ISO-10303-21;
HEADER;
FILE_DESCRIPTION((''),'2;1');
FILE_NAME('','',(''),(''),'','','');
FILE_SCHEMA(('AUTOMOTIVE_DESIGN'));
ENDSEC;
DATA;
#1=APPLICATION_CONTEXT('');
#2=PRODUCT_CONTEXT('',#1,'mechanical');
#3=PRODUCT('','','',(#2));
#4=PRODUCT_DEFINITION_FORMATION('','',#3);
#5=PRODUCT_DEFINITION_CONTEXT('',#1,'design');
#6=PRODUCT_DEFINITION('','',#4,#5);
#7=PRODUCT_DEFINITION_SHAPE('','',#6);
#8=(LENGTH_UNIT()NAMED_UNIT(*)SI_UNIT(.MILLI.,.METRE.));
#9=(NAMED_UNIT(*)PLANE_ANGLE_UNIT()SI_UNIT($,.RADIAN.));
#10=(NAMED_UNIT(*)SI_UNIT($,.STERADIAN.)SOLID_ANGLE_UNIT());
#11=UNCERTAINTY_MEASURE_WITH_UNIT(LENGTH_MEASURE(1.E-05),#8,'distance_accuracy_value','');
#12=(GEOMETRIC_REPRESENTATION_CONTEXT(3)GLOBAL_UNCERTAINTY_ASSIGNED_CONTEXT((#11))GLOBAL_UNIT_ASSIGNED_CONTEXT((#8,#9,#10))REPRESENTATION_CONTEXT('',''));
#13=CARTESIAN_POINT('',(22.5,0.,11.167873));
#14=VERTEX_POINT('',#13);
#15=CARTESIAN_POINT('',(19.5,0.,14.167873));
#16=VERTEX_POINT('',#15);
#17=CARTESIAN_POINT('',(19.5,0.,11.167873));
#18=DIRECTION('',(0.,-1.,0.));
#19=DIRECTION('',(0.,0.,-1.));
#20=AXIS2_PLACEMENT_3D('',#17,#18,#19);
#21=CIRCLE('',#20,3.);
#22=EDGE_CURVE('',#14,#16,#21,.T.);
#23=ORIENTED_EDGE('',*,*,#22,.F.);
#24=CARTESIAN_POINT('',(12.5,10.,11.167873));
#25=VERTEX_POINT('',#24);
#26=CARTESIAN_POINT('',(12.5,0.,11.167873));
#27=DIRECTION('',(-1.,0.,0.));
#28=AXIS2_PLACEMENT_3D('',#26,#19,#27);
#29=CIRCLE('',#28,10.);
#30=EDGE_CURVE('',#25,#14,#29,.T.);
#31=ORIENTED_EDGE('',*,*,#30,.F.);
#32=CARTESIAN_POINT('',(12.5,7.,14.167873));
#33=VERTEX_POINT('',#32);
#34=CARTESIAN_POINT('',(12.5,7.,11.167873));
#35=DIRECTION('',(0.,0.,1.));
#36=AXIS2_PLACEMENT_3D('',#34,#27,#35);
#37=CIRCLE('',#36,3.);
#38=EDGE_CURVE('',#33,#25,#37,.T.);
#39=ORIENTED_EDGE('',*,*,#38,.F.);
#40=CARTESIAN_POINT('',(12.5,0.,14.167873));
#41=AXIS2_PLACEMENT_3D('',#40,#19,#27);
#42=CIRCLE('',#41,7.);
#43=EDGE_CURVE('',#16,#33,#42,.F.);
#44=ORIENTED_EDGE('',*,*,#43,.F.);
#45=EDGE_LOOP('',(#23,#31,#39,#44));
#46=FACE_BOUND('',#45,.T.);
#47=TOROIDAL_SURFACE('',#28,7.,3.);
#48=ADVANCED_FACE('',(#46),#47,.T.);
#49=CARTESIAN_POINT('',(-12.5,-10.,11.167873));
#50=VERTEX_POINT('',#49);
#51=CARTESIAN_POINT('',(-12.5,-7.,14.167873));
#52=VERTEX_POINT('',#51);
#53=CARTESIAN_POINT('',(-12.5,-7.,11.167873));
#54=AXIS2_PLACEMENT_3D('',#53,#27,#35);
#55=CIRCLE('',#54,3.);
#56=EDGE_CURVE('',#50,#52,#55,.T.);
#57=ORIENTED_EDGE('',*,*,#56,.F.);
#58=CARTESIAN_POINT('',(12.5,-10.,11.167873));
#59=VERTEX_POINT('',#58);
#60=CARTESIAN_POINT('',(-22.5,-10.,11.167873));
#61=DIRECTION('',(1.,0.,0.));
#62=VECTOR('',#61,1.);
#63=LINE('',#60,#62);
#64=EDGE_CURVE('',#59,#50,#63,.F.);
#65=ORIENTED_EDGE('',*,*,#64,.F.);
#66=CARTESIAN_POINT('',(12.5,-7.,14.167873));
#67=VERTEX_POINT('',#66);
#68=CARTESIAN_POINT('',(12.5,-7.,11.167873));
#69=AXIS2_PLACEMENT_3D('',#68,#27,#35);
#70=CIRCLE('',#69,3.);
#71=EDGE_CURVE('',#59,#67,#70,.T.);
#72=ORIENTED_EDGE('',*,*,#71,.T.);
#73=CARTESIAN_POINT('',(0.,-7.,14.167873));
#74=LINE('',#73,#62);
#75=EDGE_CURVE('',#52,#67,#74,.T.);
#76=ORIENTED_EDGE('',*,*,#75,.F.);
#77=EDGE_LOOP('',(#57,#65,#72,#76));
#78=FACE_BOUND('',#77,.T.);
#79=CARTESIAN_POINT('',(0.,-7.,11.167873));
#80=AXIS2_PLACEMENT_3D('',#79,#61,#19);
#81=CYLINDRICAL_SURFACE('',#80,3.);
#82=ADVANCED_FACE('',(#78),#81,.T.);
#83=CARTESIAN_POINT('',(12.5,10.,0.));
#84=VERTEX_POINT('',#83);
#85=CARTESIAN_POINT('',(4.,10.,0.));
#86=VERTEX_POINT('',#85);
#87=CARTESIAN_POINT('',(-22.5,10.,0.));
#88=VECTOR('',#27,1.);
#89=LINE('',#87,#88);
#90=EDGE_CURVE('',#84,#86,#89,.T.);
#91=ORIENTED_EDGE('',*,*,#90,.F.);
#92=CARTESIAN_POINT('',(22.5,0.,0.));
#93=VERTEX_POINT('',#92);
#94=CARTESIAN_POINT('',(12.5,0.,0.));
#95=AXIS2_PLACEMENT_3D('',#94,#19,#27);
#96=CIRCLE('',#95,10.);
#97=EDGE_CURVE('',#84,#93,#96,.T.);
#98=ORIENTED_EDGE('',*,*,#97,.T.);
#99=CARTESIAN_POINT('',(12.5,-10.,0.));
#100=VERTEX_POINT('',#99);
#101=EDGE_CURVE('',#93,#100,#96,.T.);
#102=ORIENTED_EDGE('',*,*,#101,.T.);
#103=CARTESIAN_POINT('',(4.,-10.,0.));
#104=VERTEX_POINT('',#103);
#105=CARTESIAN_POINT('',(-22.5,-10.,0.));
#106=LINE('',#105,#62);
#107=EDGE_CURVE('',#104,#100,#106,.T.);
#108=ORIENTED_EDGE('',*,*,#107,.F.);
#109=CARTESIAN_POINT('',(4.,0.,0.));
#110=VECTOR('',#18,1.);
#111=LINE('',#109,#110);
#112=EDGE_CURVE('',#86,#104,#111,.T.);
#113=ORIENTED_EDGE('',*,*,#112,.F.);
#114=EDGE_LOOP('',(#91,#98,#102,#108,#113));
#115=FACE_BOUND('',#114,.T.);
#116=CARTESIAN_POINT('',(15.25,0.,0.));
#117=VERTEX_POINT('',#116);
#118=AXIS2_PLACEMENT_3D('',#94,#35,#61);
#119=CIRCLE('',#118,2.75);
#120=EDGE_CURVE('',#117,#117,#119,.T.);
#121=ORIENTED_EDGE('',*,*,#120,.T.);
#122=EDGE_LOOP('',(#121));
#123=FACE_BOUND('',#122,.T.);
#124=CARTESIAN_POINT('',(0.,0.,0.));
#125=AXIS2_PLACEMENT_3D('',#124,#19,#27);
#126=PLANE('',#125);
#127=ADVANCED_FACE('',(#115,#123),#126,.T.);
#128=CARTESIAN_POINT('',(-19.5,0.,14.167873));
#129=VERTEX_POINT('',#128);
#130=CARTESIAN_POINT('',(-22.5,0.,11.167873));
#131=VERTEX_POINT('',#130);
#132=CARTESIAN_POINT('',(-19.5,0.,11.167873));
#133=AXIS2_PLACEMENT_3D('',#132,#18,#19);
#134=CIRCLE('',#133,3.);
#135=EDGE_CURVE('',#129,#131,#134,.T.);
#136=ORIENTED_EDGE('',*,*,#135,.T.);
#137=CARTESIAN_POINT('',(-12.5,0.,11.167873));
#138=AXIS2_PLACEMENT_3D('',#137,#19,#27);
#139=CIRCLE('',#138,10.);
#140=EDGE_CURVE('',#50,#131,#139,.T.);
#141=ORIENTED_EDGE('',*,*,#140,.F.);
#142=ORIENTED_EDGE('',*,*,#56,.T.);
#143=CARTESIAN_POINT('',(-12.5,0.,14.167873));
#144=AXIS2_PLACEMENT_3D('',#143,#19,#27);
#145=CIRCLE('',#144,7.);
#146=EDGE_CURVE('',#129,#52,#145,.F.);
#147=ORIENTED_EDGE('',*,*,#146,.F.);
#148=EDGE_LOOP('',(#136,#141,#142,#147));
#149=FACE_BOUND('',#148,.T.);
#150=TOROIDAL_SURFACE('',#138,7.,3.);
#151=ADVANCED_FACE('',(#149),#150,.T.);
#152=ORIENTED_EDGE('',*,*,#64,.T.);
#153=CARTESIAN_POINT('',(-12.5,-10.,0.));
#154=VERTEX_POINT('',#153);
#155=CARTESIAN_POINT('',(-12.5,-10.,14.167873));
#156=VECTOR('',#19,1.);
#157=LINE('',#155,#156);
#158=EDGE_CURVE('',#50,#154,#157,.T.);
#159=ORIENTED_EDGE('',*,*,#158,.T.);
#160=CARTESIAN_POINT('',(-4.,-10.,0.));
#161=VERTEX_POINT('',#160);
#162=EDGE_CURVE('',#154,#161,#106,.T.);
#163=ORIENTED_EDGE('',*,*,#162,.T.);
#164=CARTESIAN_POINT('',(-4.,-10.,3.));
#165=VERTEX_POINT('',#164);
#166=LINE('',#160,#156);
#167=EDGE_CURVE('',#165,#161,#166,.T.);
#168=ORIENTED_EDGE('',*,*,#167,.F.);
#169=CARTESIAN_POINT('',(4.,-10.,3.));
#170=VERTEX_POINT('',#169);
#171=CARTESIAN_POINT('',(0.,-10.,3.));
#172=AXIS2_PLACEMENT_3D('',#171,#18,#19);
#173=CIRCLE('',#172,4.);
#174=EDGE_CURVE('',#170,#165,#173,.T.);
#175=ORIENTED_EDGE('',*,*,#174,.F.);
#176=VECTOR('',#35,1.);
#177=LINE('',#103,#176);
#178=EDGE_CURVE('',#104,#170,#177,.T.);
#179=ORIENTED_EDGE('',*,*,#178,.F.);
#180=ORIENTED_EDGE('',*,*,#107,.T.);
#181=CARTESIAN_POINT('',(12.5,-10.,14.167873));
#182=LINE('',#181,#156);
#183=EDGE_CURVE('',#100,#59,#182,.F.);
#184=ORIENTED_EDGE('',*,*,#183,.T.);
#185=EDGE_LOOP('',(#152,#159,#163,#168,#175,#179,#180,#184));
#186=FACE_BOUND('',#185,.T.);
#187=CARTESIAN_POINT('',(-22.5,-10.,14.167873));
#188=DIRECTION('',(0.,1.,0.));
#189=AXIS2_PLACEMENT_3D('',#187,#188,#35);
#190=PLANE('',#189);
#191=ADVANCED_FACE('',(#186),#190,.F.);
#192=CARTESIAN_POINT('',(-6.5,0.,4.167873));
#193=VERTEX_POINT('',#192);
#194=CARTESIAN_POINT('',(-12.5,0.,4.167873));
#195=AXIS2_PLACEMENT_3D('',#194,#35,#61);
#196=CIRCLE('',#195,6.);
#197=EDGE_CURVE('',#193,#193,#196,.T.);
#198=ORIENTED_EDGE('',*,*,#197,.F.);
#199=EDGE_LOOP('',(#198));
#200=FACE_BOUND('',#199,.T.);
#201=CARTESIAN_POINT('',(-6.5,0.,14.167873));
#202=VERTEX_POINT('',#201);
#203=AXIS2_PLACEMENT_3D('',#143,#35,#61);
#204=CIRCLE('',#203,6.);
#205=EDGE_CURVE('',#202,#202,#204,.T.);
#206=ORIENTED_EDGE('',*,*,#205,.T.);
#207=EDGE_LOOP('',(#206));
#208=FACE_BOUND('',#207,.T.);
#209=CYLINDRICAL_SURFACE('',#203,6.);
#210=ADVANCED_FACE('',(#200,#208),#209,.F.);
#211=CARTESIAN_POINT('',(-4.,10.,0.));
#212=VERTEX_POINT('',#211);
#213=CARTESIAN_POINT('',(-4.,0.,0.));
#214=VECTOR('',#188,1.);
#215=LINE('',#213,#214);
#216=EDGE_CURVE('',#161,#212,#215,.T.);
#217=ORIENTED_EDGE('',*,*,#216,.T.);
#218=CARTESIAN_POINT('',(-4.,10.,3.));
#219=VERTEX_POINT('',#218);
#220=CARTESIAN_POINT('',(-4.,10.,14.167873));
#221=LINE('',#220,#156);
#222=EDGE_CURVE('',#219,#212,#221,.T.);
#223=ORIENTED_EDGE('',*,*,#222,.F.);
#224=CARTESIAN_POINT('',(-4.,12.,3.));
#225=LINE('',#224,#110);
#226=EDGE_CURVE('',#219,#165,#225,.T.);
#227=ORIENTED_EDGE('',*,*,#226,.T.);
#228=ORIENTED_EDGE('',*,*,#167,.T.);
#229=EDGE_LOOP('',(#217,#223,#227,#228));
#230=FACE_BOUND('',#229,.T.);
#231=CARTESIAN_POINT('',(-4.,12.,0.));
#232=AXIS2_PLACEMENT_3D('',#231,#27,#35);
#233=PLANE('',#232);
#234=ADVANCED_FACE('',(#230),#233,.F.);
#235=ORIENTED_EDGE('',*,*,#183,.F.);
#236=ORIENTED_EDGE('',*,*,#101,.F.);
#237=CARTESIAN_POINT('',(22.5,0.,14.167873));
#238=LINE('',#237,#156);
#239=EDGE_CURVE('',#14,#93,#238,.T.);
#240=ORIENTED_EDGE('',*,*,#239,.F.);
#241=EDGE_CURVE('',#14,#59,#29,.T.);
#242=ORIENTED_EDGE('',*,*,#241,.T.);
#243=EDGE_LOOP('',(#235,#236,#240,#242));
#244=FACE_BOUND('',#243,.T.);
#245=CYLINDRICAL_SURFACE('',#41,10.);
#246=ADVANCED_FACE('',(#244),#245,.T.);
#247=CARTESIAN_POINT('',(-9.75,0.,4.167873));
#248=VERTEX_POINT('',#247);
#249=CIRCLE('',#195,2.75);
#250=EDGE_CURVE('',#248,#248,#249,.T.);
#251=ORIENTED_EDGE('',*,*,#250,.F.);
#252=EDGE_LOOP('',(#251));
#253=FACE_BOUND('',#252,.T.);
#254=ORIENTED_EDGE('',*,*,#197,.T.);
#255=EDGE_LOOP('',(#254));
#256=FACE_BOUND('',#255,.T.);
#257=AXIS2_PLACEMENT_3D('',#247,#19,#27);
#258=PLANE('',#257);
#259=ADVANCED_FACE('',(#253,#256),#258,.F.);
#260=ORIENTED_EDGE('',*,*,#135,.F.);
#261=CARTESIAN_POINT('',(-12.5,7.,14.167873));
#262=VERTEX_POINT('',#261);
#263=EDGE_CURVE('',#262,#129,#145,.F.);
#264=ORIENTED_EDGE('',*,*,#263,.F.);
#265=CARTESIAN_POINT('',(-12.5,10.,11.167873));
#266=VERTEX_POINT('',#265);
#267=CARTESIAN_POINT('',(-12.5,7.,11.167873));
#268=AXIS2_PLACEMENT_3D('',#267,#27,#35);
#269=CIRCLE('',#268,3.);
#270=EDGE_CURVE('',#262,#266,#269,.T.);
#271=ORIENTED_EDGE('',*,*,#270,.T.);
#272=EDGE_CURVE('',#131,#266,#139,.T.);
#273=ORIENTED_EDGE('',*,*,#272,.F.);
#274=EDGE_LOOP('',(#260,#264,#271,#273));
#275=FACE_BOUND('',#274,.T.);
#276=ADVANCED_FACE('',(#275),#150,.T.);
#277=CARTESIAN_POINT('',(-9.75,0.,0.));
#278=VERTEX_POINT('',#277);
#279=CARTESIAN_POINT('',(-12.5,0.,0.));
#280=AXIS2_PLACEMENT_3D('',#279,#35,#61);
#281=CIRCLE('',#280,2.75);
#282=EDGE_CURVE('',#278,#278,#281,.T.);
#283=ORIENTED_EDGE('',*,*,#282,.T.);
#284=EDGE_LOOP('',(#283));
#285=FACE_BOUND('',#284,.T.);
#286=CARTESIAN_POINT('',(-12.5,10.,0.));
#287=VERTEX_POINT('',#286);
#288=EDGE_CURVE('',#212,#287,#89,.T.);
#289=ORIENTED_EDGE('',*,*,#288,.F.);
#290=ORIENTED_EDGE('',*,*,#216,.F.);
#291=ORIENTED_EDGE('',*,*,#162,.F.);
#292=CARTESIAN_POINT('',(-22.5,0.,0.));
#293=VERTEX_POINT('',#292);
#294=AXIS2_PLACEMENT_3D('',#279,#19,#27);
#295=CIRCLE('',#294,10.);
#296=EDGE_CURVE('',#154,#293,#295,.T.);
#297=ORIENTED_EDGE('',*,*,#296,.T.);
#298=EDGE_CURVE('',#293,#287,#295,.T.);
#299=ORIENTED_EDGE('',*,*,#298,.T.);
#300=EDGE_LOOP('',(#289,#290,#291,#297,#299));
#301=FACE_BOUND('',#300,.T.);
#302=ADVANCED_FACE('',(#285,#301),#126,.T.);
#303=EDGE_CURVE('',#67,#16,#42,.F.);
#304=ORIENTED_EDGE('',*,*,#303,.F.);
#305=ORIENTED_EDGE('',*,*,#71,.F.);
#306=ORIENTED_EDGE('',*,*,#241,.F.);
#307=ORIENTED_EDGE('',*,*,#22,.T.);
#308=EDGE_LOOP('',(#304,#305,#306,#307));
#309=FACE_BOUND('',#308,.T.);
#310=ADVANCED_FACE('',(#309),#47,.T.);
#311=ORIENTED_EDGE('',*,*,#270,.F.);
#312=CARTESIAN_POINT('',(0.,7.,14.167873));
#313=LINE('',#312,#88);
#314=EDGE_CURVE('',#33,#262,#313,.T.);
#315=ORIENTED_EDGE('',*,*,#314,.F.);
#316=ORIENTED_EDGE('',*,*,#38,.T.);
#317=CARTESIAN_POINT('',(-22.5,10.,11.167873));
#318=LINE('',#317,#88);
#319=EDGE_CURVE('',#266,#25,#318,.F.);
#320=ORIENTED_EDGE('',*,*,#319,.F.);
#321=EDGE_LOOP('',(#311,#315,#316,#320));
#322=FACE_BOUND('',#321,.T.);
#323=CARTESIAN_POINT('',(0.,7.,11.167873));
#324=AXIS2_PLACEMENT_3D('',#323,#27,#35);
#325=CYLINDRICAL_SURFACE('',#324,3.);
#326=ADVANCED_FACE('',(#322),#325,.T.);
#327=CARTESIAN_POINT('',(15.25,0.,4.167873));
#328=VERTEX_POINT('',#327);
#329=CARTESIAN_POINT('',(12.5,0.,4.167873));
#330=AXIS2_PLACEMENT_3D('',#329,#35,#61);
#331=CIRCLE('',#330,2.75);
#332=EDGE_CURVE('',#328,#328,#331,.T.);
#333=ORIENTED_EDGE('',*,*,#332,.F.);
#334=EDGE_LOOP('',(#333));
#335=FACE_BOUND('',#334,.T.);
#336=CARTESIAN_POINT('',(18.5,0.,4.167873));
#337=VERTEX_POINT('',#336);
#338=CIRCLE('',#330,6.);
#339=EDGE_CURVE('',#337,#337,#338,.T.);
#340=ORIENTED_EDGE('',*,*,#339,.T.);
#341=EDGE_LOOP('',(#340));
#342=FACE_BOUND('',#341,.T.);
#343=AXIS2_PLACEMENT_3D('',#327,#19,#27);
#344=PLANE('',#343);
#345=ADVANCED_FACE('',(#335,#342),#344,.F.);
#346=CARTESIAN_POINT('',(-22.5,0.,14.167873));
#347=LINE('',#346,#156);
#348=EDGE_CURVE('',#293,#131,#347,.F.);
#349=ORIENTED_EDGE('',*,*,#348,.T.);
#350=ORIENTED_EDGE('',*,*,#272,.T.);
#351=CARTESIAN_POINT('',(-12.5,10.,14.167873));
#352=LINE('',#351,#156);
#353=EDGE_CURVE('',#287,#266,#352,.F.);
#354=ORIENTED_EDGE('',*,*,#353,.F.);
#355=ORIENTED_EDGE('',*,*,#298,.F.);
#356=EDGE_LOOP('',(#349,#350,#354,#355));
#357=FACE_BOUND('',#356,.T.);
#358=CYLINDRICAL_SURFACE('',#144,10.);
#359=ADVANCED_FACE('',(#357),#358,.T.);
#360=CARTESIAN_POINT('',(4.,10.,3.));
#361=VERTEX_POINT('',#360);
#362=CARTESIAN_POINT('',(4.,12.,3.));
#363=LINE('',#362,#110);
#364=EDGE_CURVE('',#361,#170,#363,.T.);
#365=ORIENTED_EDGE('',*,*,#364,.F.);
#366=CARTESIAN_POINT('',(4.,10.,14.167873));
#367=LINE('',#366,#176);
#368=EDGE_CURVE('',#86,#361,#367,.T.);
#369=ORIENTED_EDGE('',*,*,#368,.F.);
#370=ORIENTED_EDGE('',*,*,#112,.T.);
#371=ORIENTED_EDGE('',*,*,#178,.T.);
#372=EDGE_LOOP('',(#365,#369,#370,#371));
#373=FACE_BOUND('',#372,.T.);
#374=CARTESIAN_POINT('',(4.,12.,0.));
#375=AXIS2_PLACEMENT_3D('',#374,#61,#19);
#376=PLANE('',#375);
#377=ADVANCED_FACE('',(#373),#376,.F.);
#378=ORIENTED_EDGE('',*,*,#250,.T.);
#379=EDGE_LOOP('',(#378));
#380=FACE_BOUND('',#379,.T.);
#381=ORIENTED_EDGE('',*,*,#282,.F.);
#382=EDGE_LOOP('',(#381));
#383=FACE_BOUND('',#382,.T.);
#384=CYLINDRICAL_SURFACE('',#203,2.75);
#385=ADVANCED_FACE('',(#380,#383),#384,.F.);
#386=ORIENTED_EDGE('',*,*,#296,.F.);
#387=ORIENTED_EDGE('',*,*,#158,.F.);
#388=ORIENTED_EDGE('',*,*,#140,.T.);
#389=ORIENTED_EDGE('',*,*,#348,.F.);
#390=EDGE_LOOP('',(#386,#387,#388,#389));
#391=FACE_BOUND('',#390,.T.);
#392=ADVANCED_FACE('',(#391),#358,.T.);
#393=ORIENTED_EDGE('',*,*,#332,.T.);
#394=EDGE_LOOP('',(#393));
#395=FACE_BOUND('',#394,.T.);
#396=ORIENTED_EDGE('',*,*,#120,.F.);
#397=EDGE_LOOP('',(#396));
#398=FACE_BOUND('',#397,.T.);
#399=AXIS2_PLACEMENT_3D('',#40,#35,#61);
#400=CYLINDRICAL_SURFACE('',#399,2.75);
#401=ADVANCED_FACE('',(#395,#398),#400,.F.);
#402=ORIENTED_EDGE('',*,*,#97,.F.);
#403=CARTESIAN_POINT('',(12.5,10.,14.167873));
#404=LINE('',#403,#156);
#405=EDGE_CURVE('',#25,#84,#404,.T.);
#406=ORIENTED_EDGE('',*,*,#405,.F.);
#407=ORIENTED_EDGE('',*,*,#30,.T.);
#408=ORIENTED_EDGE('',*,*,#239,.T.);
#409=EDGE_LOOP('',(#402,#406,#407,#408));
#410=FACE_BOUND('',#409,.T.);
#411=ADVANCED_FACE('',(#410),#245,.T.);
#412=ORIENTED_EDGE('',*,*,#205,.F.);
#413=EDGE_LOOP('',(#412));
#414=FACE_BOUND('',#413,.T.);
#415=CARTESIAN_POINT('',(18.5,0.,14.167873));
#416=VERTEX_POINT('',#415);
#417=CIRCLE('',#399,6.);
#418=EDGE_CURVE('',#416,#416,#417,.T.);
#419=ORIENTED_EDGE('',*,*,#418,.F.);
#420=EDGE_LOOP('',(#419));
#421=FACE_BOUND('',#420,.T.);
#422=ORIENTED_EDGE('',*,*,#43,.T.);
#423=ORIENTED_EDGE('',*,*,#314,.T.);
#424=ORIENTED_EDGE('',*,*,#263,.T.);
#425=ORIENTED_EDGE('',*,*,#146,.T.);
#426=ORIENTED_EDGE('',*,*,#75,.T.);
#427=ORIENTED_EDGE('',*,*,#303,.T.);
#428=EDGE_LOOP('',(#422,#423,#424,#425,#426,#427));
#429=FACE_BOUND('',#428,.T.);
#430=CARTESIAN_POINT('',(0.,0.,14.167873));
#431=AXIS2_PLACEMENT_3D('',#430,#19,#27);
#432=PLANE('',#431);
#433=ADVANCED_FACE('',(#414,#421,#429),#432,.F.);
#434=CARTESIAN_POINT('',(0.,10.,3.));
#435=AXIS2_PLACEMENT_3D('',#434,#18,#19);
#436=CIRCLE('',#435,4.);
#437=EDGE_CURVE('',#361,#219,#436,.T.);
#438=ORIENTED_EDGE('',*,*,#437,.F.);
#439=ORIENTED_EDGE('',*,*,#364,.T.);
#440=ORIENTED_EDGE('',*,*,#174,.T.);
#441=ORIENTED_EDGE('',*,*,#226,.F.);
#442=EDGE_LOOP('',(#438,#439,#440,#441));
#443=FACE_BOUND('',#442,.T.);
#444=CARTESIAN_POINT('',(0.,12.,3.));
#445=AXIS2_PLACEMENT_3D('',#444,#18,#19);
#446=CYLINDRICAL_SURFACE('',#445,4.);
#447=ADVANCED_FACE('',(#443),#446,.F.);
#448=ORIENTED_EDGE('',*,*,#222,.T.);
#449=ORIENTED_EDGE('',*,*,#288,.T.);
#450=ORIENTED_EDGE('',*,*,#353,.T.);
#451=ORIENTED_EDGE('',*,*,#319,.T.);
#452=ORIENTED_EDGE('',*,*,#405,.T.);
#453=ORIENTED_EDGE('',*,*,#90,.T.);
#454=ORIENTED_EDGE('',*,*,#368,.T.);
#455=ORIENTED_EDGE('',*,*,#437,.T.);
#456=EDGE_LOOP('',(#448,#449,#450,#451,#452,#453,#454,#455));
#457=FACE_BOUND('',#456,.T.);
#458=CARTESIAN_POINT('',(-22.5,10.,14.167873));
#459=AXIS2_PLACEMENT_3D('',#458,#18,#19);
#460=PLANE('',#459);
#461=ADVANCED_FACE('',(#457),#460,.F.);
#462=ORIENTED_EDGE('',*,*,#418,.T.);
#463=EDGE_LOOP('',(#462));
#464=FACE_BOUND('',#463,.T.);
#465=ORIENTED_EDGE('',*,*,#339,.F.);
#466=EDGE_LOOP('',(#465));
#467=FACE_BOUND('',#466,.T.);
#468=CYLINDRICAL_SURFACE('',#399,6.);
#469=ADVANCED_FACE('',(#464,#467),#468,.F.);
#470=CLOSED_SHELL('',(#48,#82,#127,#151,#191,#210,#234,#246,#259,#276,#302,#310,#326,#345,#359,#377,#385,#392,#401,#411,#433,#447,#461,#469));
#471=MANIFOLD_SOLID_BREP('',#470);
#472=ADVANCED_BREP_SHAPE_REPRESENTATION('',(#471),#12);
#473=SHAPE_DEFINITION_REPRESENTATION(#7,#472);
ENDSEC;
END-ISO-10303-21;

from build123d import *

# Parameters (mm, degrees)
SKETCH2_W                               = 45
SKETCH2_H                               = 20
BOSS_EXTRUDE2_DEPTH                     = 14.16787265
FILLET1_R                               = 10
CUT_EXTRUDE1_DEPTH                      = 22
CBORE_FOR_M5_HEX_HEAD_BOLT1_D           = 5.5
CBORE_FOR_M5_HEX_HEAD_BOLT1_CBORE_D     = 12
CBORE_FOR_M5_HEX_HEAD_BOLT1_CBORE_DEPTH = 10
FILLET2_R                               = 3


with BuildPart() as part:
    # Sketch2 → Boss-Extrude2 (new body)
    with BuildSketch(Plane.XY):
        Rectangle(SKETCH2_W, SKETCH2_H)
    extrude(amount=BOSS_EXTRUDE2_DEPTH)

    # Fillet1
    fillet1_edges = [part.edges().sort_by_distance(p)[0] for p in [
        (22.5, 10, 7.083936325),
        (22.5, -10, 7.083936325),
        (-22.5, 10, 7.083936325),
        (-22.5, -10, 7.083936325),
    ]]
    fillet(fillet1_edges, radius=FILLET1_R - 0.0001)  # a hair under: the kernel refuses the full size

    # Sketch3 → Cut-Extrude1 (cut)
    with BuildSketch(Plane.XZ.offset(10)):
        with BuildLine():
            Line((-4, 0), (-4, 3))
            ThreePointArc((-4, 3), (0, 7), (4, 3))
            Line((4, 3), (4, 0))
            ThreePointArc((4, 0), (0, -4), (-4, 0))
        make_face()
    extrude(amount=-CUT_EXTRUDE1_DEPTH, mode=Mode.SUBTRACT)

    # CBORE for M5 Hex Head Bolt1 (through all)
    with Locations(Plane.XY.offset(14.16787265)):
        with Locations((-12.5, 0), (12.5, 0)):
            CounterBoreHole(CBORE_FOR_M5_HEX_HEAD_BOLT1_D / 2, CBORE_FOR_M5_HEX_HEAD_BOLT1_CBORE_D / 2, CBORE_FOR_M5_HEX_HEAD_BOLT1_CBORE_DEPTH)

    # Fillet2
    fillet2_edges = [part.edges().sort_by_distance(p)[0] for p in [
        (0, 10, 14.16787265),
        (0, -10, 14.16787265),
        (-19.571097101, -7.071097101, 14.16787265),
        (-19.571097101, 7.071097101, 14.16787265),
        (19.571097101, -7.071097101, 14.16787265),
        (19.571097101, 7.071097101, 14.16787265),
    ]]
    fillet(fillet2_edges, radius=FILLET2_R)


solid = part.part
